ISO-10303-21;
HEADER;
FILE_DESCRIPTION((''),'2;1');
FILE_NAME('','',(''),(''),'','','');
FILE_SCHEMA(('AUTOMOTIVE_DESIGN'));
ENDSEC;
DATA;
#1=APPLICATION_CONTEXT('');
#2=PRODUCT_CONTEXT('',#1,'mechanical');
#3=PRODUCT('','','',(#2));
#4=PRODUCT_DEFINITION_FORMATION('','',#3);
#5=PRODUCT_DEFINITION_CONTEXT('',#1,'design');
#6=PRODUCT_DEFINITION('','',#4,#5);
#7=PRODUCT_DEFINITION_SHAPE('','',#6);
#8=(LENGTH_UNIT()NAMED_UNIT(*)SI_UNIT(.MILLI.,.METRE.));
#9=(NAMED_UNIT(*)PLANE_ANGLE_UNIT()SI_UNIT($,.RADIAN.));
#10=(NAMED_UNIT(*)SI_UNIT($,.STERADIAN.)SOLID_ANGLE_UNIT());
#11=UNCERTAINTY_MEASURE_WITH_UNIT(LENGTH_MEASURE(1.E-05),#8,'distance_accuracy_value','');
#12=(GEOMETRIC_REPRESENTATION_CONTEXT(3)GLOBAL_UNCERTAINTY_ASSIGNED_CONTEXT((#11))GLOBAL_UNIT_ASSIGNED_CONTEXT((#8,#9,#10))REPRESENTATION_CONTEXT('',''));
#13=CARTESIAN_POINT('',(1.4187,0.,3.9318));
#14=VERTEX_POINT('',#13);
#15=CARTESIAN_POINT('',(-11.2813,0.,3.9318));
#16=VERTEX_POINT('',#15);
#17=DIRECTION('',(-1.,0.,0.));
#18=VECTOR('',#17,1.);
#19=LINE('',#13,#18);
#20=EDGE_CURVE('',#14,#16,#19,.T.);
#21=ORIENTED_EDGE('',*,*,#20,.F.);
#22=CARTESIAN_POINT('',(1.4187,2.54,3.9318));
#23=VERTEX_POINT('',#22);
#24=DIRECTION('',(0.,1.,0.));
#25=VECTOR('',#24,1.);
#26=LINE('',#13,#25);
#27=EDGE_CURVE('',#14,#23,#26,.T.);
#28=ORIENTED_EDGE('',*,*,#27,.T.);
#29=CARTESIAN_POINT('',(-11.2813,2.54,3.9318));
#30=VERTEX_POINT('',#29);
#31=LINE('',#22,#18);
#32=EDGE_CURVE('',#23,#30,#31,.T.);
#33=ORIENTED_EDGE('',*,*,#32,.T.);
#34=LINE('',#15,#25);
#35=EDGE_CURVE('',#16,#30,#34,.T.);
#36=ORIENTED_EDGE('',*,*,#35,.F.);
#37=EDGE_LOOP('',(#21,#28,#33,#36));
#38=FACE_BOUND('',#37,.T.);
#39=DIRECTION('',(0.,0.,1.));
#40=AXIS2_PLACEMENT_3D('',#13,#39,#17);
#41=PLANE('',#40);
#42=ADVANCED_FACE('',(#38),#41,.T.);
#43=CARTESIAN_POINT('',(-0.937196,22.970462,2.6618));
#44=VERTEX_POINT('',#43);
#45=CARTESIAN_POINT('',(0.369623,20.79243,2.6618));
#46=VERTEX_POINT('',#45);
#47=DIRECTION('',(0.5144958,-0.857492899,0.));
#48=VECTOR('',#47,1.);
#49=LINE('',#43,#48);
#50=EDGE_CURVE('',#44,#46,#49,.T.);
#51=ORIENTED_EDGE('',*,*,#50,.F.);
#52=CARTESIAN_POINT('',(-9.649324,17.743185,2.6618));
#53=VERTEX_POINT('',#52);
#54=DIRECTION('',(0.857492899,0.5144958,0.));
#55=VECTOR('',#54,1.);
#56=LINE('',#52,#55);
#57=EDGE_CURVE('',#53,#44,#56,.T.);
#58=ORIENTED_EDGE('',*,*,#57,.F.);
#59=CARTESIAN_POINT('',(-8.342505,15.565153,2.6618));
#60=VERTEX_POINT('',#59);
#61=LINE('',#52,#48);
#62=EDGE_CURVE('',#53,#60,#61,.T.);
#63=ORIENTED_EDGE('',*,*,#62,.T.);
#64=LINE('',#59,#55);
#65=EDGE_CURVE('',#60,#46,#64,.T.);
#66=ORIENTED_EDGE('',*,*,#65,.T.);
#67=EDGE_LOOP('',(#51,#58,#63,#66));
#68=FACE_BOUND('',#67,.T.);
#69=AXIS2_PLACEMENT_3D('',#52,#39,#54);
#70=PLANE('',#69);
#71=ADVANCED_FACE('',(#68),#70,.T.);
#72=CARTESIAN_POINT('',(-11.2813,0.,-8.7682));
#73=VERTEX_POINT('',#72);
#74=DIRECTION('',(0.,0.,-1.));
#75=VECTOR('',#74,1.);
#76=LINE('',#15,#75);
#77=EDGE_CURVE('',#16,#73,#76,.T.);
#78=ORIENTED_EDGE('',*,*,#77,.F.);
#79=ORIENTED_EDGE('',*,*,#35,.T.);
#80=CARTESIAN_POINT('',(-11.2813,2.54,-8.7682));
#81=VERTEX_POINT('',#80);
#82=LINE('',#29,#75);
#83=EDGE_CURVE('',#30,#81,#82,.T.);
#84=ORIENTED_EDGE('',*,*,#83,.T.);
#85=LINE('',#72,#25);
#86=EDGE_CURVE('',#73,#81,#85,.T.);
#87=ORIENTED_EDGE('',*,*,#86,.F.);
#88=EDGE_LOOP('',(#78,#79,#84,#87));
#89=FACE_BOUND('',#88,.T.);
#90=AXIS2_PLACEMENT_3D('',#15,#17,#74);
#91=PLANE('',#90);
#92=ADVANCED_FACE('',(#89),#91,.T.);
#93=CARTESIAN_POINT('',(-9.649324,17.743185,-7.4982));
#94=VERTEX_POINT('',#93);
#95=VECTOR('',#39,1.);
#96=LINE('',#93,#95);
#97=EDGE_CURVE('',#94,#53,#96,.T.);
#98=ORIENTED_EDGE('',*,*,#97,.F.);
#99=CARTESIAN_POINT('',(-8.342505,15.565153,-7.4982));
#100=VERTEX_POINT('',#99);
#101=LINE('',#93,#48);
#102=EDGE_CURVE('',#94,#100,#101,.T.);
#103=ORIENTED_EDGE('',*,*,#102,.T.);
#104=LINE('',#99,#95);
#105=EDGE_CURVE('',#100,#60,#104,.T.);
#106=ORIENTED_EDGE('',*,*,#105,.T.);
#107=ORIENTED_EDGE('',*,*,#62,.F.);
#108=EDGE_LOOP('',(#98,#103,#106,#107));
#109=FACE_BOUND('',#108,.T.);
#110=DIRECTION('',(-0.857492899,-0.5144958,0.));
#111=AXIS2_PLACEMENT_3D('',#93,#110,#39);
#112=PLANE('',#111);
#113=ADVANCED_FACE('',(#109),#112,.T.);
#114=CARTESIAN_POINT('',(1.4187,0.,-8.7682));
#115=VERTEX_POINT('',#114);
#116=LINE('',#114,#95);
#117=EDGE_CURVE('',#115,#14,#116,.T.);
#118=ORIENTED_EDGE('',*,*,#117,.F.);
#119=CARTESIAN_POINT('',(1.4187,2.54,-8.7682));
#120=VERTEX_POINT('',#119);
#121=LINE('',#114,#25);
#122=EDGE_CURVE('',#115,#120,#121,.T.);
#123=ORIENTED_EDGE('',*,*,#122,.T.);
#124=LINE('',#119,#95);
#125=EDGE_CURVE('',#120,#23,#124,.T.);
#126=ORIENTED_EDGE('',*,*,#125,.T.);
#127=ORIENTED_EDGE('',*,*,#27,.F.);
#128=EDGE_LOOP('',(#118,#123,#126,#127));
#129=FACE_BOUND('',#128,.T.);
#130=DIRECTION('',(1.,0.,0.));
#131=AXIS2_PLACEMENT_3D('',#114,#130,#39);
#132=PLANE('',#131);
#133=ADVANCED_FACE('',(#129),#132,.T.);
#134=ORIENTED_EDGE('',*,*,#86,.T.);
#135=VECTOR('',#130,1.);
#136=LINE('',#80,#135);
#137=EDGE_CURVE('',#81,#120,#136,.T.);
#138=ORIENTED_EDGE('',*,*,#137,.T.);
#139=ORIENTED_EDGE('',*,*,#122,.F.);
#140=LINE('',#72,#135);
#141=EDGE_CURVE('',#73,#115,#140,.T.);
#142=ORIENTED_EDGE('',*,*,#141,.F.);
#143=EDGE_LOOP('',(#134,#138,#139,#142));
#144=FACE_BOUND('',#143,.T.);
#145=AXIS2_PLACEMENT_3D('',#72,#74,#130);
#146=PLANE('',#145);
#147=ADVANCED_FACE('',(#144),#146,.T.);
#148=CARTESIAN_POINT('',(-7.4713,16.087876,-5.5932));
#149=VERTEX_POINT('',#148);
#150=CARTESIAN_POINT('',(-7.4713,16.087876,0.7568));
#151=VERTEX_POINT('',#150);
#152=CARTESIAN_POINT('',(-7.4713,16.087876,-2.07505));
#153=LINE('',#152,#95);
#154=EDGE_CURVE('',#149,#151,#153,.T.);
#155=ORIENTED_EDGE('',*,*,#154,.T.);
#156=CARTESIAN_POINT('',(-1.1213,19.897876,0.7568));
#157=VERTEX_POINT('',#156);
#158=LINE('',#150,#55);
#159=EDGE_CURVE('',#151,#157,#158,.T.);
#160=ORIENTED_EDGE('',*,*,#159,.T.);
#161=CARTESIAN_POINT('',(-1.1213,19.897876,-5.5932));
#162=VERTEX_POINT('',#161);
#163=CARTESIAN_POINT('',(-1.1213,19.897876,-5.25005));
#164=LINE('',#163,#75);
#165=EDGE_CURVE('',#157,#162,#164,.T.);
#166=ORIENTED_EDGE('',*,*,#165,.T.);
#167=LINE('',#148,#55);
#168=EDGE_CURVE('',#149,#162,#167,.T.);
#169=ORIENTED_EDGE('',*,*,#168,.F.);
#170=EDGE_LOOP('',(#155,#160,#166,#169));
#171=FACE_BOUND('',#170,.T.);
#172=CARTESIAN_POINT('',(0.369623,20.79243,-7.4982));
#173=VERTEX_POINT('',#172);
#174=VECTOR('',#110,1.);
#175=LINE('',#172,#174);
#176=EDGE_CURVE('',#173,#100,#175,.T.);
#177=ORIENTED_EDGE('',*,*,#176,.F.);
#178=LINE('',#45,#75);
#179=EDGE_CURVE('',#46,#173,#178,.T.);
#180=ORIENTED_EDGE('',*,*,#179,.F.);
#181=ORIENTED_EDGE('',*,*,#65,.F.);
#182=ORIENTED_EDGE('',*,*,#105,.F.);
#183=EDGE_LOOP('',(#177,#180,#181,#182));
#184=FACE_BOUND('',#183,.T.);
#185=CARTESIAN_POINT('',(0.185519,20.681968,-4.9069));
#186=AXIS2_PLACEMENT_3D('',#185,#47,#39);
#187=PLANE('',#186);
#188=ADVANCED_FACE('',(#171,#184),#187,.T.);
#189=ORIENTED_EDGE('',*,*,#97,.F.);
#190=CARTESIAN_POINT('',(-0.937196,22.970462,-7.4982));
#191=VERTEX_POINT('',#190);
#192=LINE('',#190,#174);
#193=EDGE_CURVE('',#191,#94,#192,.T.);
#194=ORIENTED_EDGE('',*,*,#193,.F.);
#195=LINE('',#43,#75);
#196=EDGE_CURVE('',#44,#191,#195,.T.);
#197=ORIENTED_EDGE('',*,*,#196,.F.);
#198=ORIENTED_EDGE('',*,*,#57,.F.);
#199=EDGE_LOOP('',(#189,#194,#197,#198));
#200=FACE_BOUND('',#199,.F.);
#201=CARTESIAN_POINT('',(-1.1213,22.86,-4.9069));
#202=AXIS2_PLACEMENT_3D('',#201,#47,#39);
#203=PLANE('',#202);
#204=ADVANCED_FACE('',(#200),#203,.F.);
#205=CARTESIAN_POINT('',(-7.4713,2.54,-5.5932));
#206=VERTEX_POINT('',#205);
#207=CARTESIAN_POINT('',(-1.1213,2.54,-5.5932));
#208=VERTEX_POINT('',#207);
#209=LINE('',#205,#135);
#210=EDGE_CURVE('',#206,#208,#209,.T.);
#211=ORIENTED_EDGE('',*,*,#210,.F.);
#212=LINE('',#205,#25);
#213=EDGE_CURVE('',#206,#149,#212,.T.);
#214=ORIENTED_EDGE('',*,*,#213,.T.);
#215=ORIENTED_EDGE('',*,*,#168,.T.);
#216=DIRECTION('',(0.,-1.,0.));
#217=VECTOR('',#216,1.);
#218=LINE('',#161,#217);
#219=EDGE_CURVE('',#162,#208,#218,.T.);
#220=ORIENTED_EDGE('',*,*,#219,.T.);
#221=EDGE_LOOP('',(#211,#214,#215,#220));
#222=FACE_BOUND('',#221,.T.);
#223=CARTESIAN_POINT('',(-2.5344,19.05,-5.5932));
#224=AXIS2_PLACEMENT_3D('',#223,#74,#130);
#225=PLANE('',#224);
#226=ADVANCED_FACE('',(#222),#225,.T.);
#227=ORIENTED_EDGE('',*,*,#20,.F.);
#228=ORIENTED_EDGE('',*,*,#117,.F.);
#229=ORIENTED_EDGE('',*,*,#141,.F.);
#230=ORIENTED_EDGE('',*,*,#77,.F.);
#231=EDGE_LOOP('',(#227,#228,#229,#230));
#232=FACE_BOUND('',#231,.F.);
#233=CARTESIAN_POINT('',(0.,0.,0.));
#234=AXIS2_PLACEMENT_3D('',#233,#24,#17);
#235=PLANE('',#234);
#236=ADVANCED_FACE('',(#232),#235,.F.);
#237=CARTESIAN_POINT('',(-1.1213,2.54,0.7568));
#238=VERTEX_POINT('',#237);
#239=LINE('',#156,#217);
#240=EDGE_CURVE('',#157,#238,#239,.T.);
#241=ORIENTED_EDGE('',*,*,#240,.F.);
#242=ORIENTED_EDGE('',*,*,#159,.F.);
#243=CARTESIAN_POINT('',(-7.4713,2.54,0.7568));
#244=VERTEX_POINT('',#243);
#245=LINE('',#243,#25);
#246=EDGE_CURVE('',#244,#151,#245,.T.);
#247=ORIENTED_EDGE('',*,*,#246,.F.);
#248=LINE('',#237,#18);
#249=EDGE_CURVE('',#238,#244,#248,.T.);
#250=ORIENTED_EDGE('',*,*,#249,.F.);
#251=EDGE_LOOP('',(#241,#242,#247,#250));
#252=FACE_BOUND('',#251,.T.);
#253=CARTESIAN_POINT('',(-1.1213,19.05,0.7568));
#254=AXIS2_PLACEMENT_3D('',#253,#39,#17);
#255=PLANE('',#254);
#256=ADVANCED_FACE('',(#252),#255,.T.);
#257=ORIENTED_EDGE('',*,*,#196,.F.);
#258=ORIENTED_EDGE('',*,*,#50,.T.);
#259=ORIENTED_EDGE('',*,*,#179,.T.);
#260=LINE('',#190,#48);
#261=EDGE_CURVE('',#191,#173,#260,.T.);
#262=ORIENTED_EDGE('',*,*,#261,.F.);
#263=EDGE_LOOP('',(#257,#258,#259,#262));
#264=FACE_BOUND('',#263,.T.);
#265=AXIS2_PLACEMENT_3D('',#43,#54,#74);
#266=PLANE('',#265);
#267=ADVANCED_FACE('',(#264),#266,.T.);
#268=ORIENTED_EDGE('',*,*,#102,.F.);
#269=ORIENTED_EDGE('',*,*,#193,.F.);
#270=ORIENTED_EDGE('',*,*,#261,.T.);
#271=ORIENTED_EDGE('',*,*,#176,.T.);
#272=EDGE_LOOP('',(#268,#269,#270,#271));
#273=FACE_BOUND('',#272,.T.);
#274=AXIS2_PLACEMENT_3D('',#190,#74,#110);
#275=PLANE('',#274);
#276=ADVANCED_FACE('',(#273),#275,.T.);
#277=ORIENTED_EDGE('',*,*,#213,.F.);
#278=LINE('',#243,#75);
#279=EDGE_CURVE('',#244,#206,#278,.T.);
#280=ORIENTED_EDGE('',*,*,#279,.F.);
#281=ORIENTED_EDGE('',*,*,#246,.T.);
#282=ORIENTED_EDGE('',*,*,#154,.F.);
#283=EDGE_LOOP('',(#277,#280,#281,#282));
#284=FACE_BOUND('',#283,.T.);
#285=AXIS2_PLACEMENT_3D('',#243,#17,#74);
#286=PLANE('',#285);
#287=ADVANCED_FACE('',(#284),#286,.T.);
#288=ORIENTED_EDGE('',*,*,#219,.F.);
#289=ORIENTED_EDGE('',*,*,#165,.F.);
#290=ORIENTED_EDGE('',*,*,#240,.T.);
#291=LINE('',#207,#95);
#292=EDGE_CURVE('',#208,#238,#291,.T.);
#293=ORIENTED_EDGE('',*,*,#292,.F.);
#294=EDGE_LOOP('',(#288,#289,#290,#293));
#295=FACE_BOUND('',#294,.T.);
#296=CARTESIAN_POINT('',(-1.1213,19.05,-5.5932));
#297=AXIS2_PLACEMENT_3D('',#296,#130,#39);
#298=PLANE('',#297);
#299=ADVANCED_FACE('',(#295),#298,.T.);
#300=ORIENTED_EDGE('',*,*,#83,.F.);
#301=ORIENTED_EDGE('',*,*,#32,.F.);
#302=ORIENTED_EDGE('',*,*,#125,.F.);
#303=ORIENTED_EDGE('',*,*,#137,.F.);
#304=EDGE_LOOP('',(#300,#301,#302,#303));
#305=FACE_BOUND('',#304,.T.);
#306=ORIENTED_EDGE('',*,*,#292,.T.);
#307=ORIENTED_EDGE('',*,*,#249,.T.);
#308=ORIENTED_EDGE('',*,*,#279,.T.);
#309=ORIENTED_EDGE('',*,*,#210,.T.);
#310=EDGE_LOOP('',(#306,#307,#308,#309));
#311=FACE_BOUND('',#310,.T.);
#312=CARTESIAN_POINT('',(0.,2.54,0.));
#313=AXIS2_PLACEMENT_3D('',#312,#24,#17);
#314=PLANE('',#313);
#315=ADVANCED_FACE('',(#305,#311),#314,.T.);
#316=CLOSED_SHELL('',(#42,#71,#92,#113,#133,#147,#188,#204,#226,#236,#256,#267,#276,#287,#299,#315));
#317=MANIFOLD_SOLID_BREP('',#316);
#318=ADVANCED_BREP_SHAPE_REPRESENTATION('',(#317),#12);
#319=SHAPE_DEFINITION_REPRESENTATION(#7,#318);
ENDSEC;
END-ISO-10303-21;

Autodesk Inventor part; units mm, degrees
ref_plane "YZ Plane" through (0, 0, 0) normal (1, 0, 0) x (0, 1, 0)
ref_plane "XZ Plane" through (0, 0, 0) normal (0, 1, 0) x (-1, 0, 0)
ref_plane "XY Plane" through (0, 0, 0) normal (0, 0, 1) x (1, 0, 0)
sketch "Sketch1" plane through (0, 0, 0) normal (0, 1, 0) x (-1, 0, 0)
  line L0 (-1.4187, 3.9318) -> (11.2813, 3.9318)
  line L1 (11.2813, 3.9318) -> (11.2813, -8.7682)
  line L2 (11.2813, -8.7682) -> (-1.4187, -8.7682)
  line L3 (-1.4187, -8.7682) -> (-1.4187, 3.9318)
  point P0 (0, 0)
  dimension "d0" = 12.7
  dimension "d1" = 12.7
extrude "Extrusion1" add sketch "Sketch1" along normal blind 2.54
sketch "Sketch2" plane through (0, 2.54, 0) normal (0, 1, 0) x (1, 0, 0)
  line L0 (-1.1213, -0.7568) -> (-7.4713, -0.7568)
  line L1 (-7.4713, -0.7568) -> (-7.4713, 5.5932)
  line L2 (-7.4713, 5.5932) -> (-1.1213, 5.5932)
  line L3 (-1.1213, 5.5932) -> (-1.1213, -0.7568)
  line L4 (1.4187, 8.7682) -> (-11.2813, 8.7682) projected
  line L5 (1.4187, -3.9318) -> (1.4187, 8.7682) projected
  point P0 (0, 0)
  dimension "d4" = 6.35
  dimension "d5" = 6.35
  dimension "d6" = 3.175
  dimension "d7" = 2.54
extrude "Extrusion2" add sketch "Sketch2" along normal blind 16.51
sketch "Sketch3" plane through (-1.1213, 2.54, 0.7568) normal (1, 0, 0) x (0, 0, -1)
  line L0 (0, 16.51) -> (6.35, 16.51) projected
  line L1 (3.175, 16.51) -> (3.175, 20.32)
  line L2 (3.175, 20.32) -> (5.6637, 20.32)
  point P0 (0.7568, -2.54)
  dimension "d10" = 3.81
ref_plane "Work Plane1" through (-1.1213, 22.86, -4.9069) normal (0.5144958, -0.8574929, 0) x (0, 0, 1)
sketch "Sketch4" plane through (-1.1213, 22.86, -4.9069) normal (0.5144958, -0.8574929, 0) x (0, 0, 1)
  line L0 (-2.5913, 9.9453) -> (7.5687, 9.9453)
  line L1 (7.5687, 9.9453) -> (7.5687, -0.2147)
  line L2 (7.5687, -0.2147) -> (-2.5913, -0.2147)
  line L3 (-2.5913, -0.2147) -> (-2.5913, 9.9453)
  line L4 (5.6637, 7.4053) -> (5.6637, 1.9602) projected
  line L5 (-0.6863, 7.4053) -> (5.6637, 7.4053) projected
  point P0 (4.9069, 10.7999)
  dimension "d11" = 10.16
  dimension "d12" = 10.16
  dimension "d13" = 1.905
  dimension "d14" = 2.54
extrude "Extrusion3" add sketch "Sketch4" along normal blind 2.54
sketch "Sketch5" plane through (0, 19.05, 0) normal (0, 1, 0) x (1, 0, 0)
  line L0 (-8.3425, -2.6618) -> (-8.3425, 7.4982) projected
  line L1 (-8.3425, 7.4982) -> (0.3696, 7.4982) projected
  line L2 (0.3696, 7.4982) -> (0.3696, -2.6618) projected
  line L3 (0.3696, -2.6618) -> (-8.3425, -2.6618) projected
  line L4 (-7.4713, -0.7568) -> (-7.4713, 5.5932) projected
  line L5 (-2.5344, -0.7568) -> (-7.4713, -0.7568) projected
  line L6 (-2.5344, 5.5932) -> (-2.5344, -0.7568) projected
  line L7 (-7.4713, 5.5932) -> (-2.5344, 5.5932) projected
  line L8 (-1.1213, -0.7568) -> (-2.5344, -0.7568)
  line L9 (-2.5344, -0.7568) -> (-2.5344, 5.5932)
  line L10 (-2.5344, 5.5932) -> (-1.1213, 5.5932)
  line L11 (-1.1213, 5.5932) -> (-1.1213, -0.7568)
  point P0 (0, 0)
extrude "Extrusion4" add sketch "Sketch5" along normal up to next contours L6 L10 L11 L8
properties part number "Plaque"
